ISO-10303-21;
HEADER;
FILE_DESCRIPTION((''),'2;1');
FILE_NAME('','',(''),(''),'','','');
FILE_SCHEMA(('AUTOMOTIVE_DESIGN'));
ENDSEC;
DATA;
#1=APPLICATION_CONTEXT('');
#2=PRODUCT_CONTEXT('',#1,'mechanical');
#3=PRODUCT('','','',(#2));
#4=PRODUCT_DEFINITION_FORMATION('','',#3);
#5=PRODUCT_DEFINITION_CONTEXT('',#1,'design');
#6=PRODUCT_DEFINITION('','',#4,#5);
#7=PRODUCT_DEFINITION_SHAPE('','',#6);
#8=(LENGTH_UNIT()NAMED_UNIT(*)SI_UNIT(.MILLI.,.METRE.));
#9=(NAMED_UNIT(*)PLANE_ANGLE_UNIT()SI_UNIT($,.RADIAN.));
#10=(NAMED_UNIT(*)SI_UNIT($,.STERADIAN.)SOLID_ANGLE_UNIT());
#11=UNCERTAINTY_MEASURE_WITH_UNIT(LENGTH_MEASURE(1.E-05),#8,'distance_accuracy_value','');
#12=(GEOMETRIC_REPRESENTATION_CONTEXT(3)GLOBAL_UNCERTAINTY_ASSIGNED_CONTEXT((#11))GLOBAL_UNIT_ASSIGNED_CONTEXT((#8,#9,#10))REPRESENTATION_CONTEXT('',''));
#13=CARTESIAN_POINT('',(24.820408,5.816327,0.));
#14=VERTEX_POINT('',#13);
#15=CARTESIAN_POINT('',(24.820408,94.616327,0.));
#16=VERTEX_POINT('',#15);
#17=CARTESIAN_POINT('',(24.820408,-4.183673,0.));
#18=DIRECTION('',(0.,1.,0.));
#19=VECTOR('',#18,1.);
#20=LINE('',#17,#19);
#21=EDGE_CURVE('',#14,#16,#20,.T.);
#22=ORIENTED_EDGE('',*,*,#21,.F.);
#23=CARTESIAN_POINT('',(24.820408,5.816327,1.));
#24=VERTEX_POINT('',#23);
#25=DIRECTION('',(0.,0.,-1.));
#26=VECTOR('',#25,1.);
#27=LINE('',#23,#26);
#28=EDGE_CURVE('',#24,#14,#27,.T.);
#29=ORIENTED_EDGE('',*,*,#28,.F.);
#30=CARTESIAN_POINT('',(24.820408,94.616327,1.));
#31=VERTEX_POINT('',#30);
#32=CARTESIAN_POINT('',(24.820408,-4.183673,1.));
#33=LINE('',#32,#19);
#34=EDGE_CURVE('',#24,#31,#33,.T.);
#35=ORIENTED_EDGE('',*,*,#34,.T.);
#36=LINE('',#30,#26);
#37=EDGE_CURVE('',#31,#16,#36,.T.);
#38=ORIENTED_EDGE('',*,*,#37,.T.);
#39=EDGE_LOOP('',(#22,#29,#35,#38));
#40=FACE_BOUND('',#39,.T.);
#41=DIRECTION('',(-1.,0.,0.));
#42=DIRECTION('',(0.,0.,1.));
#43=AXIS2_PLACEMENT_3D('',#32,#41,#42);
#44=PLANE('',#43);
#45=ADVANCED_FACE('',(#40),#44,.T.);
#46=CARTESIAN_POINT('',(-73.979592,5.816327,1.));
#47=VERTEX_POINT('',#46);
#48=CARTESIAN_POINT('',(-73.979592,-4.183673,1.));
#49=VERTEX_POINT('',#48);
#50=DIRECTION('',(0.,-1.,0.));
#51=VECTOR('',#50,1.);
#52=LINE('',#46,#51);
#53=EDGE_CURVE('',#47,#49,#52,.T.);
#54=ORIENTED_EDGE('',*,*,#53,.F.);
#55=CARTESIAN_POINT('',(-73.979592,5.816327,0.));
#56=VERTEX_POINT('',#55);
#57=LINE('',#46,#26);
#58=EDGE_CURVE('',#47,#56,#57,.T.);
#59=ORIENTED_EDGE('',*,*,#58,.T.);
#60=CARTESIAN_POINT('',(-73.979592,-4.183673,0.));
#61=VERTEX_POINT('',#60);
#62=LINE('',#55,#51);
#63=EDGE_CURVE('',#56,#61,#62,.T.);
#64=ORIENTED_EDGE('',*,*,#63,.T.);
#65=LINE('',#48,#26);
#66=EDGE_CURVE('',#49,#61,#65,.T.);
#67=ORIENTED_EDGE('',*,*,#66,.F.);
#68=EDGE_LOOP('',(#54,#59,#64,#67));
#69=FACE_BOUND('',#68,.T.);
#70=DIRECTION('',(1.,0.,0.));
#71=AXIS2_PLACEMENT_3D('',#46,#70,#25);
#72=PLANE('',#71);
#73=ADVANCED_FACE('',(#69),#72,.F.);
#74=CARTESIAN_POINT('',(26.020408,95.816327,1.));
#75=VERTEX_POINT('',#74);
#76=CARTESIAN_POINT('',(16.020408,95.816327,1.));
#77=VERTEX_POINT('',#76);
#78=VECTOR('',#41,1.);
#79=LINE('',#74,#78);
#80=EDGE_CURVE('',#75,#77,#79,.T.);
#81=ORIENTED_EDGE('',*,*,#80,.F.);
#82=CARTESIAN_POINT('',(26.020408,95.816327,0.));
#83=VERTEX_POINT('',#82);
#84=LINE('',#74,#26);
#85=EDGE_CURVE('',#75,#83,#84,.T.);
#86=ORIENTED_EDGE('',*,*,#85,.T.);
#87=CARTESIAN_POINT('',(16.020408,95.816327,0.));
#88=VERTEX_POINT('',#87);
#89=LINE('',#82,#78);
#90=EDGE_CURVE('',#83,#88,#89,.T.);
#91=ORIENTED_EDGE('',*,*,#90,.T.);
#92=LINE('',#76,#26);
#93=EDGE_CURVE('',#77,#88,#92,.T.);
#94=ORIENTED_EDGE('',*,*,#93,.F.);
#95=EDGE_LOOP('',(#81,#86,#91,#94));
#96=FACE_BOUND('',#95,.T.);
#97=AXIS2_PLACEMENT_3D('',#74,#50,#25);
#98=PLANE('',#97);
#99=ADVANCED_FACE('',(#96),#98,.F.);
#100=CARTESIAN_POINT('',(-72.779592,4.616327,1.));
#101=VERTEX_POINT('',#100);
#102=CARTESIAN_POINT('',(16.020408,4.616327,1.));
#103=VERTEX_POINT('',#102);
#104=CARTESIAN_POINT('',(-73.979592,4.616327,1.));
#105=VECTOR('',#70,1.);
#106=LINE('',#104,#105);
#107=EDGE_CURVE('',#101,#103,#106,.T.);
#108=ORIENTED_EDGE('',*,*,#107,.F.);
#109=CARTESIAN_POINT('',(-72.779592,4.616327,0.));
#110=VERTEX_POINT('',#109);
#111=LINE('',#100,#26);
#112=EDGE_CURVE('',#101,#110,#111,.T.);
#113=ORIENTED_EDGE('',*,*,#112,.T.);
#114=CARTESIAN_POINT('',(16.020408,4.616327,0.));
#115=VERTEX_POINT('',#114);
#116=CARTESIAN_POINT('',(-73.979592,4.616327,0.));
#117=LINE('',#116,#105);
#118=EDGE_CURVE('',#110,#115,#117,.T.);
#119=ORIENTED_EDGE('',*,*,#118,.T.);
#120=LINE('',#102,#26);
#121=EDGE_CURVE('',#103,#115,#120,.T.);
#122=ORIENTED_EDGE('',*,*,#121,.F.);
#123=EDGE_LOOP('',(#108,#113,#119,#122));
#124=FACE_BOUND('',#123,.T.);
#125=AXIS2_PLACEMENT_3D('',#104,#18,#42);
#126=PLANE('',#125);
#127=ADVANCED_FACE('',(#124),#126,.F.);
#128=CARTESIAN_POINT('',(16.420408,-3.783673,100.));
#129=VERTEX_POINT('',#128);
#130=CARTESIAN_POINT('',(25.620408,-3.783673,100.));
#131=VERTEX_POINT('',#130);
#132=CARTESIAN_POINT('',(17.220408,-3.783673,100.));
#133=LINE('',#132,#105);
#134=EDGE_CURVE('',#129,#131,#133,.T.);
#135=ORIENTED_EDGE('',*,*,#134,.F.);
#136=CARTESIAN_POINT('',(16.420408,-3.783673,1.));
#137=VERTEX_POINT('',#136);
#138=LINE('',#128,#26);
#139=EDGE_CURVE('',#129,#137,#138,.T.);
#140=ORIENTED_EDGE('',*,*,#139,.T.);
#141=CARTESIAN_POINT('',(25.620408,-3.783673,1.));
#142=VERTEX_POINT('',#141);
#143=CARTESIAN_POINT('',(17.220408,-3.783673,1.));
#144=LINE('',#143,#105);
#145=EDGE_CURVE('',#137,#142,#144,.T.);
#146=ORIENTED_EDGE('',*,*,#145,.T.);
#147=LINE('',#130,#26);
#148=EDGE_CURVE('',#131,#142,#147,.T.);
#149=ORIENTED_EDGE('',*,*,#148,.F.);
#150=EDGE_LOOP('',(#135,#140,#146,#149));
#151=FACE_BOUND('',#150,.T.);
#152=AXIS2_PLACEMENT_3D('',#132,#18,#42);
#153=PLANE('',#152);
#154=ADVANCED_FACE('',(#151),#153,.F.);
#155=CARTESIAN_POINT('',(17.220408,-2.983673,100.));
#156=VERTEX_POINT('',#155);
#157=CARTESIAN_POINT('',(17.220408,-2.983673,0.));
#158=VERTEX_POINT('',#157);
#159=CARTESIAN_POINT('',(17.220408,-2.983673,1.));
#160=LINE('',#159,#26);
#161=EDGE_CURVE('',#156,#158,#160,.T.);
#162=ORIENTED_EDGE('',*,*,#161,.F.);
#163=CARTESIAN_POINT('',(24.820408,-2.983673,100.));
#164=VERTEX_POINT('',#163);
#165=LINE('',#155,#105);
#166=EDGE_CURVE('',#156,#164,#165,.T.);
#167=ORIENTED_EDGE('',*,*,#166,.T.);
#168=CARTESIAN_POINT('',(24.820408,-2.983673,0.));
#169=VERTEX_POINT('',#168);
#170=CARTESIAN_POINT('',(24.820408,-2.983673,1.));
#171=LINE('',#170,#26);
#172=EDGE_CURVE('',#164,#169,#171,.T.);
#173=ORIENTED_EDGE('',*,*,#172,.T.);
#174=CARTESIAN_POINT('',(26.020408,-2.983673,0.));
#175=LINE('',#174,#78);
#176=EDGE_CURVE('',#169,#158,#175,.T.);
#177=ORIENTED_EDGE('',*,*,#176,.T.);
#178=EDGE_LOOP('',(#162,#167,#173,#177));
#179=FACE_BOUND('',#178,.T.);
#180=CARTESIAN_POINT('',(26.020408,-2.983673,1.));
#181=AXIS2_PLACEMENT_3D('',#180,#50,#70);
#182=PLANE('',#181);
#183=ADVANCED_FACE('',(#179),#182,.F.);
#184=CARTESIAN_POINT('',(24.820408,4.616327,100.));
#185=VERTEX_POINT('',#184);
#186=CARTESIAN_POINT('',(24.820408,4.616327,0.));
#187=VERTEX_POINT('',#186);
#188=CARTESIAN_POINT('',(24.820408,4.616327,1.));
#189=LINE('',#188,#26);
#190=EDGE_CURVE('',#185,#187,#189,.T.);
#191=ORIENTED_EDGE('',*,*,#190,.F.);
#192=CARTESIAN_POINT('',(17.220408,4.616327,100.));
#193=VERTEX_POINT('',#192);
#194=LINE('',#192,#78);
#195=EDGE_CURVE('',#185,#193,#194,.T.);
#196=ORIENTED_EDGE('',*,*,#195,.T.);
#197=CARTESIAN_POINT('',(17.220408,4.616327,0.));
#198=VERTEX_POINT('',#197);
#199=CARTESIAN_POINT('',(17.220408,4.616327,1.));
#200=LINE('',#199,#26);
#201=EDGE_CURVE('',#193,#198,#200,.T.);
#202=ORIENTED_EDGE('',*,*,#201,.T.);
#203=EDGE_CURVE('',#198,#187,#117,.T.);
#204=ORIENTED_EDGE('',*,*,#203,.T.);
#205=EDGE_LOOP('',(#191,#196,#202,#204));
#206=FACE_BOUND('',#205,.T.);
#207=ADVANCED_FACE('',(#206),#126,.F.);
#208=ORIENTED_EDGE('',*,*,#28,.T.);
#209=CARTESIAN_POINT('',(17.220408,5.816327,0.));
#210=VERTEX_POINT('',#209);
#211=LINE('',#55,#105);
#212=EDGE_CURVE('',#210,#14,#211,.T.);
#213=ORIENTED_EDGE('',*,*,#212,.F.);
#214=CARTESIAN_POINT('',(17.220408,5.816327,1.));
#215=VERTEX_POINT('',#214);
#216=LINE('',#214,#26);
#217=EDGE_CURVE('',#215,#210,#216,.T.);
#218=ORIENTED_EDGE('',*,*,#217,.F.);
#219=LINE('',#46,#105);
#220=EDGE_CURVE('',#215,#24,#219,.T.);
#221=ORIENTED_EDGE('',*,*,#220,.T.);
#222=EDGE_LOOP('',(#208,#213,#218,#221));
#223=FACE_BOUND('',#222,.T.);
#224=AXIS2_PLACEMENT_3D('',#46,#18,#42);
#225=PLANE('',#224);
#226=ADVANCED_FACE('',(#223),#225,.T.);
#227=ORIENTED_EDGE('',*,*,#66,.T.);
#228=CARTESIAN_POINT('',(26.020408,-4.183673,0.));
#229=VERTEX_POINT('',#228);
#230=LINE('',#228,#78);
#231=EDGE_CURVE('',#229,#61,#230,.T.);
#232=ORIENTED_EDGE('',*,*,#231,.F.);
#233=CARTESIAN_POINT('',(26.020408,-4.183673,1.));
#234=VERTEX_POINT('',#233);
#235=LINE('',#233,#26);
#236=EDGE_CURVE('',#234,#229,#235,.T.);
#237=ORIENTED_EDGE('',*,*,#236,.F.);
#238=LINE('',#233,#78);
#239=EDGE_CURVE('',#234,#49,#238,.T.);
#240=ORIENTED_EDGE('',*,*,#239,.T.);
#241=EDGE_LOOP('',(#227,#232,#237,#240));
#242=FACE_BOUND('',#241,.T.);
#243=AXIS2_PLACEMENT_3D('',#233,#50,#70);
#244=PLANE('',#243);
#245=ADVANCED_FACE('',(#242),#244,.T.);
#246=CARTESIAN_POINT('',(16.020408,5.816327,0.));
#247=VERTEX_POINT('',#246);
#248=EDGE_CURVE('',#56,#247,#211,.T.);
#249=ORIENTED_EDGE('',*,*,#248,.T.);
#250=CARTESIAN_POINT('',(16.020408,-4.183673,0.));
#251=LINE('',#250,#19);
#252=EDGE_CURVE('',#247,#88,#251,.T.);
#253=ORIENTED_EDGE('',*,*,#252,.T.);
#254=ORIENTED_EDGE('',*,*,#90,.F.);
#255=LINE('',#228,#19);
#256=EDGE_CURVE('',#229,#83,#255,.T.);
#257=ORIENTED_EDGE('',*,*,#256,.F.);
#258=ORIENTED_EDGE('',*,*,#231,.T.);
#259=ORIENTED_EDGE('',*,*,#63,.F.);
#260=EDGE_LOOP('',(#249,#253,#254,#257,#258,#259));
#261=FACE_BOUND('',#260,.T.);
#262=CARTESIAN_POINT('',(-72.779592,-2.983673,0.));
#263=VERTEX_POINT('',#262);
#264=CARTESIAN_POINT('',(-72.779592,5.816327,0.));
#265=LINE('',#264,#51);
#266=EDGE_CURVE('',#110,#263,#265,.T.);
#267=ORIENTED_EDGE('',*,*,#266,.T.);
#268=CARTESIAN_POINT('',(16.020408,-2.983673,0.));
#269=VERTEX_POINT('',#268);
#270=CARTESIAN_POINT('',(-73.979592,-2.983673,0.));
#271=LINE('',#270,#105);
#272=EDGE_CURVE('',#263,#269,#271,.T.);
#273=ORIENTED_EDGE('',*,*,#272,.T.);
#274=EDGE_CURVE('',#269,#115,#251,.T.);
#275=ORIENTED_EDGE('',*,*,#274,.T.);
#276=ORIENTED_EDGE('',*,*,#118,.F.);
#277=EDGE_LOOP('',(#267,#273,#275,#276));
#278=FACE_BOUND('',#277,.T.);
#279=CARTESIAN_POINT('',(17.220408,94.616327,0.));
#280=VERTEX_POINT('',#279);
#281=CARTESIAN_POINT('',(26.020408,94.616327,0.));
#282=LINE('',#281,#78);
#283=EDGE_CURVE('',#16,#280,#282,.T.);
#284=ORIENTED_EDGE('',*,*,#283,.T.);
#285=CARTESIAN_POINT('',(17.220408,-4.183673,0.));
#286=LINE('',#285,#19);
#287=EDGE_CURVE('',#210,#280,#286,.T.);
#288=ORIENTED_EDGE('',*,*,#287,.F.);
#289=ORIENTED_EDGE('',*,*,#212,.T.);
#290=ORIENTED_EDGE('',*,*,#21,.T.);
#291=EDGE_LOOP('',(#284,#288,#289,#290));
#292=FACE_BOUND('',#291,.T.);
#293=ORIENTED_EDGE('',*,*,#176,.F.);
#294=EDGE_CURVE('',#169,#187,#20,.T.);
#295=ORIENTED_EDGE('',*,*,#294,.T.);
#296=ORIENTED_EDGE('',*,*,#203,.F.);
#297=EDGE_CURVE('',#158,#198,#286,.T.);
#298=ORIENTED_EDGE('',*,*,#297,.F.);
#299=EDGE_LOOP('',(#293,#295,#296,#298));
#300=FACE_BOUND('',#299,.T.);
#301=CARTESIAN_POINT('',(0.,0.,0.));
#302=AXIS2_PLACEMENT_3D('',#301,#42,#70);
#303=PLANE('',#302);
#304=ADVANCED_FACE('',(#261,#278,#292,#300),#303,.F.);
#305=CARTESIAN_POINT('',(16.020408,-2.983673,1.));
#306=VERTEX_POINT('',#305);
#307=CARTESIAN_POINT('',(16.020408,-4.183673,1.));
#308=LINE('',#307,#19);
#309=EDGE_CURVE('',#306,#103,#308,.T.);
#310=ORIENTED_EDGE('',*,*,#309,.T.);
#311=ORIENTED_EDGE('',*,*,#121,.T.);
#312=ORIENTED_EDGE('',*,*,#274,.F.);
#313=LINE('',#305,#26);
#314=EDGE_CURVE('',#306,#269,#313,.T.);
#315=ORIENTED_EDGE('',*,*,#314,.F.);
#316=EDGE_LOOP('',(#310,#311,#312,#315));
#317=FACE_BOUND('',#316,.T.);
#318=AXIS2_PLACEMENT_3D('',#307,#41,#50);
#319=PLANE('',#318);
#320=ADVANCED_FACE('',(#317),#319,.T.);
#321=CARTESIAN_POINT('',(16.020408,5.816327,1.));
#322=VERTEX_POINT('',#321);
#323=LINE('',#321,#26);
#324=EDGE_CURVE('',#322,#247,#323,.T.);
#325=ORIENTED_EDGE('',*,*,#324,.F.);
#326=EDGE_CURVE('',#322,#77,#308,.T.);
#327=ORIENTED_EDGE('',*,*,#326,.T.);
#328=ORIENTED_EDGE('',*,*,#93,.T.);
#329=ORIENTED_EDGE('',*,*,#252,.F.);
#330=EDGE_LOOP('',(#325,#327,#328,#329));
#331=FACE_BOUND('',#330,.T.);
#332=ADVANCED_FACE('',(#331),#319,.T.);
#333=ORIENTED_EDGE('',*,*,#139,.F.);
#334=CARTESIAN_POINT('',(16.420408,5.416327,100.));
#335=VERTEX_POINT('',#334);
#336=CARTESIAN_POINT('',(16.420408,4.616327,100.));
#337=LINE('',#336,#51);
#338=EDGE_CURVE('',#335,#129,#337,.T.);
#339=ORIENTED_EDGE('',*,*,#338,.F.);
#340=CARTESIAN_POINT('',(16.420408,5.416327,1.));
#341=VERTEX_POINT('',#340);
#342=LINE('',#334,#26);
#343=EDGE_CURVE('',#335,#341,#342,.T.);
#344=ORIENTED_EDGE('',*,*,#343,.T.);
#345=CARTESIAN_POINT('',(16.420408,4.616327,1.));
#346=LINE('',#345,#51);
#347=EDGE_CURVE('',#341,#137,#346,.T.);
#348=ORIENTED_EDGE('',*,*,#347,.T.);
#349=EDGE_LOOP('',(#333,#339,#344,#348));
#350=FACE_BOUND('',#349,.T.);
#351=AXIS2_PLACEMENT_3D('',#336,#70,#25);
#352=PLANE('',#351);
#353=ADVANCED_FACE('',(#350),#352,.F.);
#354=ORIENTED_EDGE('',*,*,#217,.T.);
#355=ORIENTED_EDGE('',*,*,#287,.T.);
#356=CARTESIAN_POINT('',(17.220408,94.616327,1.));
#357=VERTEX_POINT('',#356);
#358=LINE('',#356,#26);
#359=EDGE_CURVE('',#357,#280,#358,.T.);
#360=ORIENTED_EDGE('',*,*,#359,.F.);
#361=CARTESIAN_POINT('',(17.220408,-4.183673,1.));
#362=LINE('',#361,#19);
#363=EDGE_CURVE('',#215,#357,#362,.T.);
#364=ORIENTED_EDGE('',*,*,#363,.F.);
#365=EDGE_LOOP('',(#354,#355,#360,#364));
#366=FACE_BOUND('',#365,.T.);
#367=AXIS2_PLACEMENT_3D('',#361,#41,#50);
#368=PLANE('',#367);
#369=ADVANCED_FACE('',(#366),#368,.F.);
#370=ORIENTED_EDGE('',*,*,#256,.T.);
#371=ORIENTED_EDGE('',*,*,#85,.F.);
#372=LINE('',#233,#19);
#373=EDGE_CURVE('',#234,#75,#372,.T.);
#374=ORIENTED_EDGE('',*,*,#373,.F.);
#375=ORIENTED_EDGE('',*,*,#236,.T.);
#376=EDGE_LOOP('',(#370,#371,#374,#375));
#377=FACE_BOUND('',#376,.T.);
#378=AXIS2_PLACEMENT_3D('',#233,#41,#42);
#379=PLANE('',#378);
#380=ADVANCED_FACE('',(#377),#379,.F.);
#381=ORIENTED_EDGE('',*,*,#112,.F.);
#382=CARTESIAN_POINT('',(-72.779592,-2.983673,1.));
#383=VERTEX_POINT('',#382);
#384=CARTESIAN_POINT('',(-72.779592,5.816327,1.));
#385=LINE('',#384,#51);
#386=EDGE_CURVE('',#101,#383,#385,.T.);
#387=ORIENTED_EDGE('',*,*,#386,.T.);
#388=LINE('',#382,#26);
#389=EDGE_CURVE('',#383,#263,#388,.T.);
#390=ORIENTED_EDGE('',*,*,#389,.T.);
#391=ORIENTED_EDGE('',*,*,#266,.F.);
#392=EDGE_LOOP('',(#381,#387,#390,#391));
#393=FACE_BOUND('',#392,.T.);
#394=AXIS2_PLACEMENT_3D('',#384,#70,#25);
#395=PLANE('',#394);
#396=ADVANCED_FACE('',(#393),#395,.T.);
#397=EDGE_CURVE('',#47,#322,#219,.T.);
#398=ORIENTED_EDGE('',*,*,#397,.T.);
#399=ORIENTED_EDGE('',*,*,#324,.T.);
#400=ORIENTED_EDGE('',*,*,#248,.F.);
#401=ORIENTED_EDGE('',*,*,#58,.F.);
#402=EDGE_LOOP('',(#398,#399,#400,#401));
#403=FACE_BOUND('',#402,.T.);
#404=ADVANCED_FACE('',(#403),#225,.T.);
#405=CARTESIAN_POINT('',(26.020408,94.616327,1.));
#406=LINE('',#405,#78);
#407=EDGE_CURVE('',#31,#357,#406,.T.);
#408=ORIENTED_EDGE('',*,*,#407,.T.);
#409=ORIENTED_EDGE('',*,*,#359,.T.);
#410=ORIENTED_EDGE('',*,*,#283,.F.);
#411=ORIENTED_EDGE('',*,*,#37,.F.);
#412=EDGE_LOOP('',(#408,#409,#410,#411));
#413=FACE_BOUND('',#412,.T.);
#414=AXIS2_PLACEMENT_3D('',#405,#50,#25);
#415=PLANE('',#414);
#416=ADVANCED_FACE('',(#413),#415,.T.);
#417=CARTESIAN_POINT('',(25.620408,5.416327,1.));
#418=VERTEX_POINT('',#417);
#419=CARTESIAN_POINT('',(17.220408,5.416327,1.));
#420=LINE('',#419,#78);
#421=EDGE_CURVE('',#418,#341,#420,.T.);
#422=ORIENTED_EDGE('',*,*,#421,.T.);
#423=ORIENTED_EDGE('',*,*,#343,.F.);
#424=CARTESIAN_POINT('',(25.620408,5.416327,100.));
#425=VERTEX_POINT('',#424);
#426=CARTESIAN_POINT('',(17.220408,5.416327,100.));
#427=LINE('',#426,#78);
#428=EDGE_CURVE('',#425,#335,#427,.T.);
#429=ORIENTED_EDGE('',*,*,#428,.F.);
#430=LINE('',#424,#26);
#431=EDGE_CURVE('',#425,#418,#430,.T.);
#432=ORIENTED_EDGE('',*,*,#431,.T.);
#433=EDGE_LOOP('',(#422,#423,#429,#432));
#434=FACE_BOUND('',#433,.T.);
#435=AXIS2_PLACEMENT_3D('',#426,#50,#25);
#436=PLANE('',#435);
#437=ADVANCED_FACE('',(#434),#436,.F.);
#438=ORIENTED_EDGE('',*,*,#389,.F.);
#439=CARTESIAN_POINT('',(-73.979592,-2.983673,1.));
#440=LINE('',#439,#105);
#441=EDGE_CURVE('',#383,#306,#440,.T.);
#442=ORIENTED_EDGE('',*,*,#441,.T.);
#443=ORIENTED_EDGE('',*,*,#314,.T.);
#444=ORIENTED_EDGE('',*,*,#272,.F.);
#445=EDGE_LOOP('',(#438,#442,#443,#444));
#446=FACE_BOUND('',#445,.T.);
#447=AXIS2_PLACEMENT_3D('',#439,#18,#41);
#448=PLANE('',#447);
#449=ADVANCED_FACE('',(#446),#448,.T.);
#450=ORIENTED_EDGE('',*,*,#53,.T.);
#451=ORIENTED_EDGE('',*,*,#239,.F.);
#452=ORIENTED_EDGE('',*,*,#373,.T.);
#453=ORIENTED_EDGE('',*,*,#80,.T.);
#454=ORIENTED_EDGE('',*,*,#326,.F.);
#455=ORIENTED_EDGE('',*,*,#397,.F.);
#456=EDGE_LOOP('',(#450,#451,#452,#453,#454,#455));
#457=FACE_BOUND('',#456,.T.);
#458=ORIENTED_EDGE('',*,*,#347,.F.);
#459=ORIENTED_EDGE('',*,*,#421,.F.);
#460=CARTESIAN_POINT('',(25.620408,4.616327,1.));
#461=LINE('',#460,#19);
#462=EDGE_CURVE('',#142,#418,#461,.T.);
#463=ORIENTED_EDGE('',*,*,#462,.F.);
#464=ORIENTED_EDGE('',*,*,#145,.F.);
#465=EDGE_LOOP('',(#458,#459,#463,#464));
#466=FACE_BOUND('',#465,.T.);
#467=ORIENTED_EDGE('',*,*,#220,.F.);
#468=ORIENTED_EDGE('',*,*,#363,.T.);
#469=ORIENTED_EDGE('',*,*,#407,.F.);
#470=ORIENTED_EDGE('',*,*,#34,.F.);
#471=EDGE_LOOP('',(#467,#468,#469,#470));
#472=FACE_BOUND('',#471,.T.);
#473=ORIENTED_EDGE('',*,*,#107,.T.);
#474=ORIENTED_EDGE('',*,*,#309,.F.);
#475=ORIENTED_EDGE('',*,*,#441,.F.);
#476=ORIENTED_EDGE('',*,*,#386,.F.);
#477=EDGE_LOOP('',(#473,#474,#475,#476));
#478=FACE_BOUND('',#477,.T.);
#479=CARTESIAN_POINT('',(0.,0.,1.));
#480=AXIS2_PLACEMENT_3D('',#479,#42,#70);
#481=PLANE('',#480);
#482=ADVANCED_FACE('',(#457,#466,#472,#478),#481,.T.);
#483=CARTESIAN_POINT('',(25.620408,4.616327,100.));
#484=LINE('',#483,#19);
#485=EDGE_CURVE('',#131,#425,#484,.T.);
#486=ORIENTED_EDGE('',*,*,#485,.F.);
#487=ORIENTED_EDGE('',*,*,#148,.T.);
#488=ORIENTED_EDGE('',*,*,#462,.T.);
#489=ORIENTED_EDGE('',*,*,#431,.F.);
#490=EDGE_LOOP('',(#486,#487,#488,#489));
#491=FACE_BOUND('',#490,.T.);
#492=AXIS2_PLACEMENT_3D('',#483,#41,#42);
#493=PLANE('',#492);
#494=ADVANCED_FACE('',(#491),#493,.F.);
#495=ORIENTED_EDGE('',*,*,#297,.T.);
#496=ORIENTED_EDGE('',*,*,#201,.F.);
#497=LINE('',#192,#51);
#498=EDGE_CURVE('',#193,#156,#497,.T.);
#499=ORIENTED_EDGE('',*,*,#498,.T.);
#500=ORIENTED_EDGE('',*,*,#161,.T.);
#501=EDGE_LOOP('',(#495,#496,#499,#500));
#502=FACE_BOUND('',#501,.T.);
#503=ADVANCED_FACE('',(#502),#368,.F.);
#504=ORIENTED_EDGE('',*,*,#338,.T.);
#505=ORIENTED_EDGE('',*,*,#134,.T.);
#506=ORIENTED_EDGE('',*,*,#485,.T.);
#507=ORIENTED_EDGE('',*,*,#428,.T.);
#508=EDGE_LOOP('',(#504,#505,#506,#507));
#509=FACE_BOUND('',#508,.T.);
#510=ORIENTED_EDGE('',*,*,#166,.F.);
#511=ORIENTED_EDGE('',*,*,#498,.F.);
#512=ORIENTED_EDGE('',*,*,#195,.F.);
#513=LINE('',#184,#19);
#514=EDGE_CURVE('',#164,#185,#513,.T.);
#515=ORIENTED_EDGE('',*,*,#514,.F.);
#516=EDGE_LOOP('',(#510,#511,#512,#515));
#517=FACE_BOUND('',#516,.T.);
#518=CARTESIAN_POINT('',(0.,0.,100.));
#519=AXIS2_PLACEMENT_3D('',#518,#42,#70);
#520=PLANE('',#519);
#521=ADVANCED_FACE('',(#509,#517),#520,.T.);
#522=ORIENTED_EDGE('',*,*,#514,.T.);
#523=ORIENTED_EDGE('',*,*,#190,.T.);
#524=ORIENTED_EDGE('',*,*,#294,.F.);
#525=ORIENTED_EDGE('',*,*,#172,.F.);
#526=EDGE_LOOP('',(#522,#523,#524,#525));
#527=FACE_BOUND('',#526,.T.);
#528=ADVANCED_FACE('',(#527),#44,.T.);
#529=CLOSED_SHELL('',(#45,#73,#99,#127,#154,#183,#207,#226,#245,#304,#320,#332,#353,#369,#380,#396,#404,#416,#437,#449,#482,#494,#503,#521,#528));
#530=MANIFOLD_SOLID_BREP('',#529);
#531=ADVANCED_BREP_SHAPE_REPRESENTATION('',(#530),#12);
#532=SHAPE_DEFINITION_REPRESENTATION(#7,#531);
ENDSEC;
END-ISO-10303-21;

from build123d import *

# Parameters (mm, degrees)
EXTRUDE_1_OUTLINE_W   = 88.8
EXTRUDE_1_OUTLINE_H   = 7.6
EXTRUDE_1_OUTLINE_W_2 = 7.6
EXTRUDE_1_OUTLINE_H_2 = 88.8
EXTRUDE_1_DEPTH       = 1
SKETCH_2_W            = 9.2
SKETCH_2_H            = 9.2
SKETCH_2_W_2          = 7.6
SKETCH_2_H_2          = 7.6
EXTRUDE_2_DEPTH       = 99


# Read off the part's stored shape, not the designer's step: 拉伸-薄壁1
with BuildPart() as part:
    # 拉伸-薄壁1 outline → 拉伸-薄壁1 (new body)
    with BuildSketch(Plane.XY):
        Polygon((-73.979591837, 5.816326531), (-73.979591837, -4.183673469), (26.020408163, -4.183673469), (26.020408163, 95.816326531), (16.020408163, 95.816326531), (16.020408163, 5.816326531), align=None)
        with Locations((-28.379591837, 0.816326531)):
            Rectangle(EXTRUDE_1_OUTLINE_W, EXTRUDE_1_OUTLINE_H, mode=Mode.SUBTRACT)
        with Locations((21.020408163, 0.816326531)):
            Rectangle(EXTRUDE_1_OUTLINE_W_2, EXTRUDE_1_OUTLINE_H, mode=Mode.SUBTRACT)
        with Locations((21.020408163, 50.216326531)):
            Rectangle(EXTRUDE_1_OUTLINE_W_2, EXTRUDE_1_OUTLINE_H_2, mode=Mode.SUBTRACT)
    extrude(amount=EXTRUDE_1_DEPTH)

    # 草图2 → 拉伸-薄壁2 (add)
    with BuildSketch(Plane.XY.offset(1)):
        with Locations((21.020408163, 0.816326531)):
            Rectangle(SKETCH_2_W, SKETCH_2_H)
        with Locations((21.020408163, 0.816326531)):
            Rectangle(SKETCH_2_W_2, SKETCH_2_H_2, mode=Mode.SUBTRACT)
    extrude(amount=EXTRUDE_2_DEPTH)


solid = part.part
